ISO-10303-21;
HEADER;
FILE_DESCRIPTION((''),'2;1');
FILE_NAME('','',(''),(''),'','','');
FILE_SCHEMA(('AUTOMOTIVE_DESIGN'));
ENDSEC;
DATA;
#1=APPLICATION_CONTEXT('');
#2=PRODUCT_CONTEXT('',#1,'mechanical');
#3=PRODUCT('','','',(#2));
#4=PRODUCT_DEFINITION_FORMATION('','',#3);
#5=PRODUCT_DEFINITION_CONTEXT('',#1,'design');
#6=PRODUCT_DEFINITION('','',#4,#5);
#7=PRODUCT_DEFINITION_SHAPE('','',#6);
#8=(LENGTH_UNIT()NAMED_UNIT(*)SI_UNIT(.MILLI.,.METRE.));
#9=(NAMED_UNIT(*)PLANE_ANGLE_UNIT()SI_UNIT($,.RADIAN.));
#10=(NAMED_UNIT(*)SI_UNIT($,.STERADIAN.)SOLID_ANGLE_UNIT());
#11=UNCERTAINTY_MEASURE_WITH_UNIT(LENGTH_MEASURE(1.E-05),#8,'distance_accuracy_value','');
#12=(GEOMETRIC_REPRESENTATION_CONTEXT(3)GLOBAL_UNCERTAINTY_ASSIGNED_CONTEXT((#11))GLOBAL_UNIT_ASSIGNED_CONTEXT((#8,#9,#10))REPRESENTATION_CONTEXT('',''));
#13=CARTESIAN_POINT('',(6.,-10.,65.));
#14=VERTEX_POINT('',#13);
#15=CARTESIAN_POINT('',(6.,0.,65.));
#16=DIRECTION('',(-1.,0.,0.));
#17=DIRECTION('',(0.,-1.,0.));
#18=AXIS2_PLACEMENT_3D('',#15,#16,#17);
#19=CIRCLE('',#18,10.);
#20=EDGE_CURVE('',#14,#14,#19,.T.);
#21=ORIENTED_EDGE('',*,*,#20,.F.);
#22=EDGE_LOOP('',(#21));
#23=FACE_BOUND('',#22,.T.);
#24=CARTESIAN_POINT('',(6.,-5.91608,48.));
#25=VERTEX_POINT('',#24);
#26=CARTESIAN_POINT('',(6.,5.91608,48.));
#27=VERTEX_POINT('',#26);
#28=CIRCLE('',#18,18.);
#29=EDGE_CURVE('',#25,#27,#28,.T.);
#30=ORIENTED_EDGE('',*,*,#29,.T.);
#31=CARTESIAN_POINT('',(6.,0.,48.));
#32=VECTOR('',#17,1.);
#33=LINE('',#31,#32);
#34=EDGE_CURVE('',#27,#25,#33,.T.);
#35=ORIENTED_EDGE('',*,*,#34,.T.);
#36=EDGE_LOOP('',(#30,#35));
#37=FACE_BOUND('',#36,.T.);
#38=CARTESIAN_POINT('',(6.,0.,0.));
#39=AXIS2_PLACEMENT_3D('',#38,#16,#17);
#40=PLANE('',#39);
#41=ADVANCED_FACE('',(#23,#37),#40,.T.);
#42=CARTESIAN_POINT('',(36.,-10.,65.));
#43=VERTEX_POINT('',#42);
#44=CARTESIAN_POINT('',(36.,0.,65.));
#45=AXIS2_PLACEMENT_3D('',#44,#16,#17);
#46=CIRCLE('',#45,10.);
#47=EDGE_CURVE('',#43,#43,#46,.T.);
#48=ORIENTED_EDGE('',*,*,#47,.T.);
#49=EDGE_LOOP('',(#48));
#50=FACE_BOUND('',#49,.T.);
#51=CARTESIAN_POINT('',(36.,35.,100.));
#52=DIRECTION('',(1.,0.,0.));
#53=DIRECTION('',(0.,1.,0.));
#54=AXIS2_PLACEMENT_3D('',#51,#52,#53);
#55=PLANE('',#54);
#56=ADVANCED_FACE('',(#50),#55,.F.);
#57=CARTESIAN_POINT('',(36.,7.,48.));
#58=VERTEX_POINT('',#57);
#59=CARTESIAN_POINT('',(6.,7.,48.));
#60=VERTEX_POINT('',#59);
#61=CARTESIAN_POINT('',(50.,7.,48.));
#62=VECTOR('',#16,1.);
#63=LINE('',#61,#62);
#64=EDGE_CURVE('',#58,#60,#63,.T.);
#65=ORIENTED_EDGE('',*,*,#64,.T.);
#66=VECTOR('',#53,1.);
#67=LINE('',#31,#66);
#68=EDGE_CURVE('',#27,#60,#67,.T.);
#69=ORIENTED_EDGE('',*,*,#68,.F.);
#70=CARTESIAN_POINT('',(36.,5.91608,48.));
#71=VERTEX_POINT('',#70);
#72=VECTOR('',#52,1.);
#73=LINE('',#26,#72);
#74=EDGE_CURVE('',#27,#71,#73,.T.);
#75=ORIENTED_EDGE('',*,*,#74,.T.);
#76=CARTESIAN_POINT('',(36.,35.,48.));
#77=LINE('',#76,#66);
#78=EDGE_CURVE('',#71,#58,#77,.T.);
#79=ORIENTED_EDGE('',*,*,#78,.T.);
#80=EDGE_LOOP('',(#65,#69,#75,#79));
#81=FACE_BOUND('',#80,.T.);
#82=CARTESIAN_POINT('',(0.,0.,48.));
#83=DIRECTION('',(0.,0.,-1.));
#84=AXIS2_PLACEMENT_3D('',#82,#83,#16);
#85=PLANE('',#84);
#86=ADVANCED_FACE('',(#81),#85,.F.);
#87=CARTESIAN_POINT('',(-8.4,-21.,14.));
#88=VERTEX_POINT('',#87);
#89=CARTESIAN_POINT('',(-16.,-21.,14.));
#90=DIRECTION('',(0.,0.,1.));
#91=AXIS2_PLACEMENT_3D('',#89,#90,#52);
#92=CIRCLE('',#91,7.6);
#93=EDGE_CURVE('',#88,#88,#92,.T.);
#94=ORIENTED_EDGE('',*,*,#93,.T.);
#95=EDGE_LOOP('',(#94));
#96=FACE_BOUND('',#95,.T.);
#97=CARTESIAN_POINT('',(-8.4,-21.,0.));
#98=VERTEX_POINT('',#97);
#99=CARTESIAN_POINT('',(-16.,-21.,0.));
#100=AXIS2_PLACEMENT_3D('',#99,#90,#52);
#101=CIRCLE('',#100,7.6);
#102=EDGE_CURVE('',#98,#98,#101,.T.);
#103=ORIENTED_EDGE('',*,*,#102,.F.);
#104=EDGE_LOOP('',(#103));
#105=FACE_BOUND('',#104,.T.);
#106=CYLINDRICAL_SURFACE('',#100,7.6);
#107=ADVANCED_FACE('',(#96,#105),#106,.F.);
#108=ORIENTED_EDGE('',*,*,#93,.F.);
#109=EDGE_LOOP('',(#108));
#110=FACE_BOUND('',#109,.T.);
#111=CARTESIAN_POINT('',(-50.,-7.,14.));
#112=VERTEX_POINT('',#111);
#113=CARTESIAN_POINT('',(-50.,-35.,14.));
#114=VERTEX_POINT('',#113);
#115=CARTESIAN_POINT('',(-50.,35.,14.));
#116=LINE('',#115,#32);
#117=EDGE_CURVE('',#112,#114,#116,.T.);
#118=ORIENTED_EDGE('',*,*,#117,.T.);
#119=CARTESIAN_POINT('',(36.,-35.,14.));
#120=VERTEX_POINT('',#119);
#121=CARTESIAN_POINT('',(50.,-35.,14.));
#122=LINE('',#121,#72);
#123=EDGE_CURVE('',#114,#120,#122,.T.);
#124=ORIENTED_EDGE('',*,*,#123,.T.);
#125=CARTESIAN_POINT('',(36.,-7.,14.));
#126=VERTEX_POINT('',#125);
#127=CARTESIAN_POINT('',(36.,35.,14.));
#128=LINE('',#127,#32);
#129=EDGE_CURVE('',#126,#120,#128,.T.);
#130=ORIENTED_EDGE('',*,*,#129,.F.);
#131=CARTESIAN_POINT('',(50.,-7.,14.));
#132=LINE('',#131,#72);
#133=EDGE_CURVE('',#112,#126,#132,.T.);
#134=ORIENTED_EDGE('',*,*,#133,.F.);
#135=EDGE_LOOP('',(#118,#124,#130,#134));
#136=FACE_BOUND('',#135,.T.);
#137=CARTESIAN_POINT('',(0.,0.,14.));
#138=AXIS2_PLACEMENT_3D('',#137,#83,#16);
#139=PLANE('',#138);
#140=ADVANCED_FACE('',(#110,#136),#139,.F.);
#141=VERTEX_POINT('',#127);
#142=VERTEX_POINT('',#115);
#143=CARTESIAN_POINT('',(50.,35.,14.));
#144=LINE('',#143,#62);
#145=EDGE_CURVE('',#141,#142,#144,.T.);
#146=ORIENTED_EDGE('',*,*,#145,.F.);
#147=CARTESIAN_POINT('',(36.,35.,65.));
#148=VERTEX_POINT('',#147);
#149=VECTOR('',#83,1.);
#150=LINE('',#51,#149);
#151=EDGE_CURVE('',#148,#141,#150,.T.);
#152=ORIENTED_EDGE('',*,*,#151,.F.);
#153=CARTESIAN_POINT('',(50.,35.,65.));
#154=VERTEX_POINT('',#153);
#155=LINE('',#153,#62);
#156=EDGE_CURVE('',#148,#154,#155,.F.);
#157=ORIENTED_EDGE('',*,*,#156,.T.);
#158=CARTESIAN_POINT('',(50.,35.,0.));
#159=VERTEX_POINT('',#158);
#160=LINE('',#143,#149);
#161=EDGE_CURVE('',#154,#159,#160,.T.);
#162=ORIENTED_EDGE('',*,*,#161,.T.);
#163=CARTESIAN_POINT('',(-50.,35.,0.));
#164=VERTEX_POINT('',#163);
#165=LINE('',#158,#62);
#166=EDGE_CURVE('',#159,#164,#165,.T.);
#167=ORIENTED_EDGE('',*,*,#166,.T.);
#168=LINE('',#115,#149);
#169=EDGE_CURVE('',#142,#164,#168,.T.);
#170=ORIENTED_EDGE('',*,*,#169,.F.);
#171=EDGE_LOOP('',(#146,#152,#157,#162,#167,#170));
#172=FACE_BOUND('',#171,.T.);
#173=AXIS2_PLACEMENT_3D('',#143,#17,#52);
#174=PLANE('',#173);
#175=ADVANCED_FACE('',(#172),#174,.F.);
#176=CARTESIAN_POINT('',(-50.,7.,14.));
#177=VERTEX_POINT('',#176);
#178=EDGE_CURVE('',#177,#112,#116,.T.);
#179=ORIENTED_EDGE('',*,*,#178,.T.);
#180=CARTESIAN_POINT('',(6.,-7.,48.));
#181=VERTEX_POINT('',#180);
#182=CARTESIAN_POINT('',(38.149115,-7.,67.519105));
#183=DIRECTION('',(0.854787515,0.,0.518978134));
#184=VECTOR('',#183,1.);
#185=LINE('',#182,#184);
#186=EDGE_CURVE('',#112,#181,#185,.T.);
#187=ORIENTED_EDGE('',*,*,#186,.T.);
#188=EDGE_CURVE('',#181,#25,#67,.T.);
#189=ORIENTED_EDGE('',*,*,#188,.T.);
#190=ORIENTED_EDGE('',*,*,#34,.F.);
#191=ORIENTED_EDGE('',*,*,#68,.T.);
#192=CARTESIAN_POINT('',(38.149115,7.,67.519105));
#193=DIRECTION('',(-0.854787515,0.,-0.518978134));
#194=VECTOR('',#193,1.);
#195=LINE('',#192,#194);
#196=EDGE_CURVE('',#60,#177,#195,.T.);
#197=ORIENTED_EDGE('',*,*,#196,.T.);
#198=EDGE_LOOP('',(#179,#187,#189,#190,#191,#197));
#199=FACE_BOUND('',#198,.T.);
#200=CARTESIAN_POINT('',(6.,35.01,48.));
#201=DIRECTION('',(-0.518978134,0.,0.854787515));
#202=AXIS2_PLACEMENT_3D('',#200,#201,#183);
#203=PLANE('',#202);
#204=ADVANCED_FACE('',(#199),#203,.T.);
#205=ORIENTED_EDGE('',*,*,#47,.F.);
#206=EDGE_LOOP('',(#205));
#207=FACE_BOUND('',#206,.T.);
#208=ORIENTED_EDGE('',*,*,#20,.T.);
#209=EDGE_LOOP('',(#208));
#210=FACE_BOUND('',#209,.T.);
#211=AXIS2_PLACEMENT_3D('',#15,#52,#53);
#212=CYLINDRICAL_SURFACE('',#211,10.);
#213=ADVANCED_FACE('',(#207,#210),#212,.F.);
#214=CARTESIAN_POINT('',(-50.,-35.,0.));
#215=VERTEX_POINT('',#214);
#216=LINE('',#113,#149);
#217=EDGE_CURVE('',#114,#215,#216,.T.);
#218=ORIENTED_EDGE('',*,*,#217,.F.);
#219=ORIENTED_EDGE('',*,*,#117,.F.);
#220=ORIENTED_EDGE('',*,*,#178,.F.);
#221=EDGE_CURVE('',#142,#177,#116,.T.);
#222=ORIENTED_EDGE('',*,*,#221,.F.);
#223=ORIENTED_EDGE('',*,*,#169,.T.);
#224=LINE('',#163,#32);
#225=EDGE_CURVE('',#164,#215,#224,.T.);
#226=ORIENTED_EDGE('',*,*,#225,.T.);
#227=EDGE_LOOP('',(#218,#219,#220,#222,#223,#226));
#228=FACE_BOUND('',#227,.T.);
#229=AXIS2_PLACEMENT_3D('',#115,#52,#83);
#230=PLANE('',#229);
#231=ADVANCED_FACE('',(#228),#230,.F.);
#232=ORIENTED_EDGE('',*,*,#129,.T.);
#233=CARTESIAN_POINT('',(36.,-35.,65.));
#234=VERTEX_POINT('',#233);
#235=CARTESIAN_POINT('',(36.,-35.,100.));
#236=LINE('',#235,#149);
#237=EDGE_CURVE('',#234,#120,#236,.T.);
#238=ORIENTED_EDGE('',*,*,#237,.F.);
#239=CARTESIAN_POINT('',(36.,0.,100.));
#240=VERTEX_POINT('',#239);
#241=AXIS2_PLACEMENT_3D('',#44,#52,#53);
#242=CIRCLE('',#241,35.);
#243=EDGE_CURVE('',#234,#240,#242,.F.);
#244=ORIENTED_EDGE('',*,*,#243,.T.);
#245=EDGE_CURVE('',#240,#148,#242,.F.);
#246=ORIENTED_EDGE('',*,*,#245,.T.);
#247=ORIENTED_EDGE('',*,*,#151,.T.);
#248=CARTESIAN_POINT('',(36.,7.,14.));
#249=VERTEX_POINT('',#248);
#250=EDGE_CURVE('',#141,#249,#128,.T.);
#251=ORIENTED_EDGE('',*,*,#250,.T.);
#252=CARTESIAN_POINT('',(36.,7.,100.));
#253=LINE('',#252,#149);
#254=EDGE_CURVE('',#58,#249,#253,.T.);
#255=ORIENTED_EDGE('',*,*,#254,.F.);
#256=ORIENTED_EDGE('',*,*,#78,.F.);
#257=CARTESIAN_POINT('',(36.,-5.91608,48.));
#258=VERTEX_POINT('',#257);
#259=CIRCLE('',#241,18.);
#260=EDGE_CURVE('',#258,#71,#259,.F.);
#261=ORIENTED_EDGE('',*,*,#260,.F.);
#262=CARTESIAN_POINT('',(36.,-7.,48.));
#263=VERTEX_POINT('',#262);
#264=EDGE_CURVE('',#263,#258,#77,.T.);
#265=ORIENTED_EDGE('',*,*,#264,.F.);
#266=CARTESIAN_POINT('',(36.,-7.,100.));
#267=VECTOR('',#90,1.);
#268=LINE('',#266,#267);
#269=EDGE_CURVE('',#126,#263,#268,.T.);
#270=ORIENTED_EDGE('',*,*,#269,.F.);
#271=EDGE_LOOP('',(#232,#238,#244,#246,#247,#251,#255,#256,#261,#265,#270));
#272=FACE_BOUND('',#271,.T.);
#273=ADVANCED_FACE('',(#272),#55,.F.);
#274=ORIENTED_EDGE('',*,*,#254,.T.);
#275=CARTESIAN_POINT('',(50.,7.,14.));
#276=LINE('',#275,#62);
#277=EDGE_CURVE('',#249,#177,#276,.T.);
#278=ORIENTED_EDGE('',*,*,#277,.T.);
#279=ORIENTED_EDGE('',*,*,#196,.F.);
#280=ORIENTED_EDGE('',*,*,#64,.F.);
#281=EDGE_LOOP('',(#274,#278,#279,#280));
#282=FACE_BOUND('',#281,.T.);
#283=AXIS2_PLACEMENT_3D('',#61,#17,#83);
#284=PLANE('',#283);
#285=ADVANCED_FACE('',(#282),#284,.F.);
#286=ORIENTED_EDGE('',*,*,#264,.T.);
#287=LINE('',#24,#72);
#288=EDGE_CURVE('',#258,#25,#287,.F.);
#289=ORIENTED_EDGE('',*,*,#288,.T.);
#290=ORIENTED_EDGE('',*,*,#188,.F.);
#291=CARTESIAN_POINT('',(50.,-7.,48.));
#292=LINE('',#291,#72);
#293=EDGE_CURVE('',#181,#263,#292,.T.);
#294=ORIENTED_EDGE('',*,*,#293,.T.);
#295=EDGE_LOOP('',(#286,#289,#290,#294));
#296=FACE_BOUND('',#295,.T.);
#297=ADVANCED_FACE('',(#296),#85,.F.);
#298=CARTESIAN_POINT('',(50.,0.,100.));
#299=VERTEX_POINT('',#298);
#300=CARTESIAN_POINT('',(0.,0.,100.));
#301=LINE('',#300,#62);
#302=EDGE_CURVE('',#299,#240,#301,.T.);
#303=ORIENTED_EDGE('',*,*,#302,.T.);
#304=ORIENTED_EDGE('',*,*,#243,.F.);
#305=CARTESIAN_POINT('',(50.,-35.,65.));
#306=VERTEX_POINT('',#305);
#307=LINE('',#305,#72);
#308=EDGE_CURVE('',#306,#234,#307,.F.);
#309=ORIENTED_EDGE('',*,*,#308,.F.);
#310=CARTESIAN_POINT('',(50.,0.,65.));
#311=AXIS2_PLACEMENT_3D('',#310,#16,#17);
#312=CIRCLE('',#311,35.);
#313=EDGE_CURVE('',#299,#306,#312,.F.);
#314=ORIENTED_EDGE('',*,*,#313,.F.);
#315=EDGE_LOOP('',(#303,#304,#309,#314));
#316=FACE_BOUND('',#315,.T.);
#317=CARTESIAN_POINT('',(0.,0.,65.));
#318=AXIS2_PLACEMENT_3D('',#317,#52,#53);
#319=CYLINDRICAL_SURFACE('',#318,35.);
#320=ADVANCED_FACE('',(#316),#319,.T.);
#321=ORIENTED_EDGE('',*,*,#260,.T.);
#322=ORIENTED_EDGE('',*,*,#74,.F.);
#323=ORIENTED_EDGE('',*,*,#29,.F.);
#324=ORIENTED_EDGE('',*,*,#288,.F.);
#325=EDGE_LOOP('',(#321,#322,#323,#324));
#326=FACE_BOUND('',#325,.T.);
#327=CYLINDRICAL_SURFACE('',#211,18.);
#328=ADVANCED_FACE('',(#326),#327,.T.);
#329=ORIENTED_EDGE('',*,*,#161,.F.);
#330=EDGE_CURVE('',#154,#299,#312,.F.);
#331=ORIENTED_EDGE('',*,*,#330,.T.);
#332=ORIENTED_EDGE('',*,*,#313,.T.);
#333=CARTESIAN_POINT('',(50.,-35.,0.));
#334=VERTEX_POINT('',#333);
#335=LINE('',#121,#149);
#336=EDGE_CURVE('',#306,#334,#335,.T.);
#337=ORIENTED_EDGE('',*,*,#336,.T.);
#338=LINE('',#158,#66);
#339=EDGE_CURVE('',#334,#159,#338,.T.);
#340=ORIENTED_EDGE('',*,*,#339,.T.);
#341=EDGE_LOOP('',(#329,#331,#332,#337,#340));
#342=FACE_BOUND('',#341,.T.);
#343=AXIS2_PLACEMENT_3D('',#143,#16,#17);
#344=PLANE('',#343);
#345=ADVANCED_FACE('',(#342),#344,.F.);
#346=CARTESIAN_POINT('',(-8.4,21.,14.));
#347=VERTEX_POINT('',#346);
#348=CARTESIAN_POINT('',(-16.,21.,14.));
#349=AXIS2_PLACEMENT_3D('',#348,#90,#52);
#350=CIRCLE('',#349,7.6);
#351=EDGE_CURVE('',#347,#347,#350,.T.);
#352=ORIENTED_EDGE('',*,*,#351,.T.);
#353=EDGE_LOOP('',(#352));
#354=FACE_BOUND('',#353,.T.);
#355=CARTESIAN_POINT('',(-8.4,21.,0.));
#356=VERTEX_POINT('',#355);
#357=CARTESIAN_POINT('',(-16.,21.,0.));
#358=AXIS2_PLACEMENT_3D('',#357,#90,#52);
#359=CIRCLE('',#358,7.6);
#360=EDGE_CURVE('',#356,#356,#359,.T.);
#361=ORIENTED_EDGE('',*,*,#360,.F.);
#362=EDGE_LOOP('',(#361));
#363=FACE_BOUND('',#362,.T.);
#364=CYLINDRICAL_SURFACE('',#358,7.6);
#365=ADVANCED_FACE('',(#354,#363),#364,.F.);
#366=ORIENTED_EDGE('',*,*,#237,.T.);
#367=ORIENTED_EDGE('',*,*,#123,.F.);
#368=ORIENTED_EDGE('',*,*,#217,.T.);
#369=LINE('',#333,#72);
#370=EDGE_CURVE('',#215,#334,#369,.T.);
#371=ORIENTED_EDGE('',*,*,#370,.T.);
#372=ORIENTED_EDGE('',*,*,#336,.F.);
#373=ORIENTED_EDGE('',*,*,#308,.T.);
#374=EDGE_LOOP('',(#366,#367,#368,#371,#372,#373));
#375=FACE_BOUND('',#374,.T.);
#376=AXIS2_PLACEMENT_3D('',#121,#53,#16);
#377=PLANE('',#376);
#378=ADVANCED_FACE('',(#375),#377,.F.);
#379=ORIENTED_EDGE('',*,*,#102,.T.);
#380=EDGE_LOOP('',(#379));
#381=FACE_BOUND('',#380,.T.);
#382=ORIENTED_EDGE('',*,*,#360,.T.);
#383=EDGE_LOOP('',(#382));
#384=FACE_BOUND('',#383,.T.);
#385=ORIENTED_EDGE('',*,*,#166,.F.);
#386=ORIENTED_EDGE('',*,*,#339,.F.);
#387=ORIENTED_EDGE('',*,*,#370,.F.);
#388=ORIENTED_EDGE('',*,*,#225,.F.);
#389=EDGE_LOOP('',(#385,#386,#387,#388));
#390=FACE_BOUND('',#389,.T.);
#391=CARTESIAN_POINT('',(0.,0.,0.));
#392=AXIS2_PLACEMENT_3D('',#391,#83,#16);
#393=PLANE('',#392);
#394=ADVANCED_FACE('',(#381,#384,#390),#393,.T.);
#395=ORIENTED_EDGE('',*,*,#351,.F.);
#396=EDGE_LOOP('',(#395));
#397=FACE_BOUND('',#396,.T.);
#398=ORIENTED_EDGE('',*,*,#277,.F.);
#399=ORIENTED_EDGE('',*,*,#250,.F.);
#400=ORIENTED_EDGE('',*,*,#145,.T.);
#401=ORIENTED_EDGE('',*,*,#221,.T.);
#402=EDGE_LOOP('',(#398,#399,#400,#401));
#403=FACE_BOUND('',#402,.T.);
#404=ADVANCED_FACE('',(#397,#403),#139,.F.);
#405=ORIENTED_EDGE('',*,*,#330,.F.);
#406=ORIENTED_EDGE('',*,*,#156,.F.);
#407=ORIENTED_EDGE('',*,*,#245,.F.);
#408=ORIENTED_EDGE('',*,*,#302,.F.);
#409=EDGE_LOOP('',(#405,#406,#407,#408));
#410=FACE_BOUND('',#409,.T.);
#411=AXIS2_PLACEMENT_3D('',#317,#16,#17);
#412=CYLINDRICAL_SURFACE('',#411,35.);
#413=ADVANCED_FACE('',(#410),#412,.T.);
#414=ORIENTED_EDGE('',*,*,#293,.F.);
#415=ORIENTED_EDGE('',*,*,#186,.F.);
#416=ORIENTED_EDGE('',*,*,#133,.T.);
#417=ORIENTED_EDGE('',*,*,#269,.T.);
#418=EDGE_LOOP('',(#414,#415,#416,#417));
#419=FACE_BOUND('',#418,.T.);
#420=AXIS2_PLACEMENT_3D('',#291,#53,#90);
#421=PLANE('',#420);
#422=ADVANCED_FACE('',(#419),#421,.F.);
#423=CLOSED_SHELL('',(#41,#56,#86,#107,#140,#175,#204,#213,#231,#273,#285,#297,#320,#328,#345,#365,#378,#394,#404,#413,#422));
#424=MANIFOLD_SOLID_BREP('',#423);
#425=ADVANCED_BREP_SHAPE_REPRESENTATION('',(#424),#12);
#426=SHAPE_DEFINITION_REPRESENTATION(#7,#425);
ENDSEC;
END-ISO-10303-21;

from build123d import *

# Parameters (mm, degrees)
SKETCH_1_W                     = 100
SKETCH_1_H                     = 70
EXTRUDE_1_DEPTH                = 14
SKETCH_4_W                     = 14
SKETCH_4_H                     = 70
EXTRUDE_2_DEPTH                = 86
FILLET_1_R                     = 35
FILLET_2_R                     = 35
SKETCH_5_R                     = 7.6
CUT_EXTRUDE_1_DEPTH            = 106.456152025
SKETCH_6_R                     = 7.6
CUT_EXTRUDE_2_DEPTH            = 106.456152025
SKETCH_7_R                     = 18
SKETCH_7_R_2                   = 10
EXTRUDE_3_DEPTH                = 30
SKETCH_8_W                     = 100
SKETCH_8_H                     = 14
EXTRUDE_4_DEPTH                = 34
SPLIT_BODIES_1_SURFACE_1_BACK  = 158.797
SPLIT_BODIES_1_SURFACE_1_DEPTH = 317.594


with BuildPart() as part:
    # Эскиз1 → Бобышка-Вытянуть1 (new body)
    with BuildSketch(Plane.XY):
        Rectangle(SKETCH_1_W, SKETCH_1_H)
    extrude(amount=EXTRUDE_1_DEPTH)

    # Эскиз4 → Бобышка-Вытянуть2 (add)
    with BuildSketch(Plane.XY.offset(14)):
        with Locations((43, 0)):
            Rectangle(SKETCH_4_W, SKETCH_4_H)
    extrude(amount=EXTRUDE_2_DEPTH)

    # Скругление1
    fillet_1_edges = [part.edges().sort_by_distance(p)[0] for p in [
        (43, 35, 100),
    ]]
    fillet(fillet_1_edges, radius=FILLET_1_R)

    # Скругление2
    fillet_2_edges = [part.edges().sort_by_distance(p)[0] for p in [
        (43, -35, 100),
    ]]
    fillet(fillet_2_edges, radius=FILLET_2_R - 0.0001)  # a hair under: the kernel refuses the full size

    # Эскиз5 → Вырез-Вытянуть1 (cut, through all)
    with BuildSketch(Plane.XY.offset(14)):
        with Locations((-16, 21)):
            Circle(SKETCH_5_R)
    extrude(amount=-CUT_EXTRUDE_1_DEPTH, mode=Mode.SUBTRACT)

    # Эскиз6 → Вырез-Вытянуть2 (cut, through all)
    with BuildSketch(Plane.XY.offset(14)):
        with Locations((-16, -21)):
            Circle(SKETCH_6_R)
    extrude(amount=-CUT_EXTRUDE_2_DEPTH, mode=Mode.SUBTRACT)

    # Эскиз7 → Бобышка-Вытянуть3 (add)
    with BuildSketch(Plane.ZY.offset(-36)):
        with Locations(Location((65, 0, 0), (0, 0, 90))):
            Circle(SKETCH_7_R)
        with Locations(Location((65, 0, 0), (0, 0, 270))):
            Circle(SKETCH_7_R_2, mode=Mode.SUBTRACT)
    extrude(amount=EXTRUDE_3_DEPTH)

    # Эскиз8 → Бобышка-Вытянуть4 (add)
    with BuildSketch(Plane.XY.offset(14)):
        Rectangle(SKETCH_8_W, SKETCH_8_H)
    extrude(amount=EXTRUDE_4_DEPTH)

    # Split Bodies 1: cut with a surface, the side it looks to stays
    # Split Bodies 1 surface: a surface, the sketch's curves swept straight by 317.594 mm
    with BuildLine(Plane(origin=(0, -7, 0), x_dir=(-1, 0, 0), z_dir=(0, -1, 0)).offset(-SPLIT_BODIES_1_SURFACE_1_BACK), mode=Mode.PRIVATE) as split_bodies_1_surface_1_path:
        Line((-6, -48), (50, -14))
    split_bodies_1_surface_1 = Shell.extrude(split_bodies_1_surface_1_path.wire(), (0 * SPLIT_BODIES_1_SURFACE_1_DEPTH, -1 * SPLIT_BODIES_1_SURFACE_1_DEPTH, 0 * SPLIT_BODIES_1_SURFACE_1_DEPTH))
    split(bisect_by=split_bodies_1_surface_1, keep=Keep.TOP)


solid = part.part
